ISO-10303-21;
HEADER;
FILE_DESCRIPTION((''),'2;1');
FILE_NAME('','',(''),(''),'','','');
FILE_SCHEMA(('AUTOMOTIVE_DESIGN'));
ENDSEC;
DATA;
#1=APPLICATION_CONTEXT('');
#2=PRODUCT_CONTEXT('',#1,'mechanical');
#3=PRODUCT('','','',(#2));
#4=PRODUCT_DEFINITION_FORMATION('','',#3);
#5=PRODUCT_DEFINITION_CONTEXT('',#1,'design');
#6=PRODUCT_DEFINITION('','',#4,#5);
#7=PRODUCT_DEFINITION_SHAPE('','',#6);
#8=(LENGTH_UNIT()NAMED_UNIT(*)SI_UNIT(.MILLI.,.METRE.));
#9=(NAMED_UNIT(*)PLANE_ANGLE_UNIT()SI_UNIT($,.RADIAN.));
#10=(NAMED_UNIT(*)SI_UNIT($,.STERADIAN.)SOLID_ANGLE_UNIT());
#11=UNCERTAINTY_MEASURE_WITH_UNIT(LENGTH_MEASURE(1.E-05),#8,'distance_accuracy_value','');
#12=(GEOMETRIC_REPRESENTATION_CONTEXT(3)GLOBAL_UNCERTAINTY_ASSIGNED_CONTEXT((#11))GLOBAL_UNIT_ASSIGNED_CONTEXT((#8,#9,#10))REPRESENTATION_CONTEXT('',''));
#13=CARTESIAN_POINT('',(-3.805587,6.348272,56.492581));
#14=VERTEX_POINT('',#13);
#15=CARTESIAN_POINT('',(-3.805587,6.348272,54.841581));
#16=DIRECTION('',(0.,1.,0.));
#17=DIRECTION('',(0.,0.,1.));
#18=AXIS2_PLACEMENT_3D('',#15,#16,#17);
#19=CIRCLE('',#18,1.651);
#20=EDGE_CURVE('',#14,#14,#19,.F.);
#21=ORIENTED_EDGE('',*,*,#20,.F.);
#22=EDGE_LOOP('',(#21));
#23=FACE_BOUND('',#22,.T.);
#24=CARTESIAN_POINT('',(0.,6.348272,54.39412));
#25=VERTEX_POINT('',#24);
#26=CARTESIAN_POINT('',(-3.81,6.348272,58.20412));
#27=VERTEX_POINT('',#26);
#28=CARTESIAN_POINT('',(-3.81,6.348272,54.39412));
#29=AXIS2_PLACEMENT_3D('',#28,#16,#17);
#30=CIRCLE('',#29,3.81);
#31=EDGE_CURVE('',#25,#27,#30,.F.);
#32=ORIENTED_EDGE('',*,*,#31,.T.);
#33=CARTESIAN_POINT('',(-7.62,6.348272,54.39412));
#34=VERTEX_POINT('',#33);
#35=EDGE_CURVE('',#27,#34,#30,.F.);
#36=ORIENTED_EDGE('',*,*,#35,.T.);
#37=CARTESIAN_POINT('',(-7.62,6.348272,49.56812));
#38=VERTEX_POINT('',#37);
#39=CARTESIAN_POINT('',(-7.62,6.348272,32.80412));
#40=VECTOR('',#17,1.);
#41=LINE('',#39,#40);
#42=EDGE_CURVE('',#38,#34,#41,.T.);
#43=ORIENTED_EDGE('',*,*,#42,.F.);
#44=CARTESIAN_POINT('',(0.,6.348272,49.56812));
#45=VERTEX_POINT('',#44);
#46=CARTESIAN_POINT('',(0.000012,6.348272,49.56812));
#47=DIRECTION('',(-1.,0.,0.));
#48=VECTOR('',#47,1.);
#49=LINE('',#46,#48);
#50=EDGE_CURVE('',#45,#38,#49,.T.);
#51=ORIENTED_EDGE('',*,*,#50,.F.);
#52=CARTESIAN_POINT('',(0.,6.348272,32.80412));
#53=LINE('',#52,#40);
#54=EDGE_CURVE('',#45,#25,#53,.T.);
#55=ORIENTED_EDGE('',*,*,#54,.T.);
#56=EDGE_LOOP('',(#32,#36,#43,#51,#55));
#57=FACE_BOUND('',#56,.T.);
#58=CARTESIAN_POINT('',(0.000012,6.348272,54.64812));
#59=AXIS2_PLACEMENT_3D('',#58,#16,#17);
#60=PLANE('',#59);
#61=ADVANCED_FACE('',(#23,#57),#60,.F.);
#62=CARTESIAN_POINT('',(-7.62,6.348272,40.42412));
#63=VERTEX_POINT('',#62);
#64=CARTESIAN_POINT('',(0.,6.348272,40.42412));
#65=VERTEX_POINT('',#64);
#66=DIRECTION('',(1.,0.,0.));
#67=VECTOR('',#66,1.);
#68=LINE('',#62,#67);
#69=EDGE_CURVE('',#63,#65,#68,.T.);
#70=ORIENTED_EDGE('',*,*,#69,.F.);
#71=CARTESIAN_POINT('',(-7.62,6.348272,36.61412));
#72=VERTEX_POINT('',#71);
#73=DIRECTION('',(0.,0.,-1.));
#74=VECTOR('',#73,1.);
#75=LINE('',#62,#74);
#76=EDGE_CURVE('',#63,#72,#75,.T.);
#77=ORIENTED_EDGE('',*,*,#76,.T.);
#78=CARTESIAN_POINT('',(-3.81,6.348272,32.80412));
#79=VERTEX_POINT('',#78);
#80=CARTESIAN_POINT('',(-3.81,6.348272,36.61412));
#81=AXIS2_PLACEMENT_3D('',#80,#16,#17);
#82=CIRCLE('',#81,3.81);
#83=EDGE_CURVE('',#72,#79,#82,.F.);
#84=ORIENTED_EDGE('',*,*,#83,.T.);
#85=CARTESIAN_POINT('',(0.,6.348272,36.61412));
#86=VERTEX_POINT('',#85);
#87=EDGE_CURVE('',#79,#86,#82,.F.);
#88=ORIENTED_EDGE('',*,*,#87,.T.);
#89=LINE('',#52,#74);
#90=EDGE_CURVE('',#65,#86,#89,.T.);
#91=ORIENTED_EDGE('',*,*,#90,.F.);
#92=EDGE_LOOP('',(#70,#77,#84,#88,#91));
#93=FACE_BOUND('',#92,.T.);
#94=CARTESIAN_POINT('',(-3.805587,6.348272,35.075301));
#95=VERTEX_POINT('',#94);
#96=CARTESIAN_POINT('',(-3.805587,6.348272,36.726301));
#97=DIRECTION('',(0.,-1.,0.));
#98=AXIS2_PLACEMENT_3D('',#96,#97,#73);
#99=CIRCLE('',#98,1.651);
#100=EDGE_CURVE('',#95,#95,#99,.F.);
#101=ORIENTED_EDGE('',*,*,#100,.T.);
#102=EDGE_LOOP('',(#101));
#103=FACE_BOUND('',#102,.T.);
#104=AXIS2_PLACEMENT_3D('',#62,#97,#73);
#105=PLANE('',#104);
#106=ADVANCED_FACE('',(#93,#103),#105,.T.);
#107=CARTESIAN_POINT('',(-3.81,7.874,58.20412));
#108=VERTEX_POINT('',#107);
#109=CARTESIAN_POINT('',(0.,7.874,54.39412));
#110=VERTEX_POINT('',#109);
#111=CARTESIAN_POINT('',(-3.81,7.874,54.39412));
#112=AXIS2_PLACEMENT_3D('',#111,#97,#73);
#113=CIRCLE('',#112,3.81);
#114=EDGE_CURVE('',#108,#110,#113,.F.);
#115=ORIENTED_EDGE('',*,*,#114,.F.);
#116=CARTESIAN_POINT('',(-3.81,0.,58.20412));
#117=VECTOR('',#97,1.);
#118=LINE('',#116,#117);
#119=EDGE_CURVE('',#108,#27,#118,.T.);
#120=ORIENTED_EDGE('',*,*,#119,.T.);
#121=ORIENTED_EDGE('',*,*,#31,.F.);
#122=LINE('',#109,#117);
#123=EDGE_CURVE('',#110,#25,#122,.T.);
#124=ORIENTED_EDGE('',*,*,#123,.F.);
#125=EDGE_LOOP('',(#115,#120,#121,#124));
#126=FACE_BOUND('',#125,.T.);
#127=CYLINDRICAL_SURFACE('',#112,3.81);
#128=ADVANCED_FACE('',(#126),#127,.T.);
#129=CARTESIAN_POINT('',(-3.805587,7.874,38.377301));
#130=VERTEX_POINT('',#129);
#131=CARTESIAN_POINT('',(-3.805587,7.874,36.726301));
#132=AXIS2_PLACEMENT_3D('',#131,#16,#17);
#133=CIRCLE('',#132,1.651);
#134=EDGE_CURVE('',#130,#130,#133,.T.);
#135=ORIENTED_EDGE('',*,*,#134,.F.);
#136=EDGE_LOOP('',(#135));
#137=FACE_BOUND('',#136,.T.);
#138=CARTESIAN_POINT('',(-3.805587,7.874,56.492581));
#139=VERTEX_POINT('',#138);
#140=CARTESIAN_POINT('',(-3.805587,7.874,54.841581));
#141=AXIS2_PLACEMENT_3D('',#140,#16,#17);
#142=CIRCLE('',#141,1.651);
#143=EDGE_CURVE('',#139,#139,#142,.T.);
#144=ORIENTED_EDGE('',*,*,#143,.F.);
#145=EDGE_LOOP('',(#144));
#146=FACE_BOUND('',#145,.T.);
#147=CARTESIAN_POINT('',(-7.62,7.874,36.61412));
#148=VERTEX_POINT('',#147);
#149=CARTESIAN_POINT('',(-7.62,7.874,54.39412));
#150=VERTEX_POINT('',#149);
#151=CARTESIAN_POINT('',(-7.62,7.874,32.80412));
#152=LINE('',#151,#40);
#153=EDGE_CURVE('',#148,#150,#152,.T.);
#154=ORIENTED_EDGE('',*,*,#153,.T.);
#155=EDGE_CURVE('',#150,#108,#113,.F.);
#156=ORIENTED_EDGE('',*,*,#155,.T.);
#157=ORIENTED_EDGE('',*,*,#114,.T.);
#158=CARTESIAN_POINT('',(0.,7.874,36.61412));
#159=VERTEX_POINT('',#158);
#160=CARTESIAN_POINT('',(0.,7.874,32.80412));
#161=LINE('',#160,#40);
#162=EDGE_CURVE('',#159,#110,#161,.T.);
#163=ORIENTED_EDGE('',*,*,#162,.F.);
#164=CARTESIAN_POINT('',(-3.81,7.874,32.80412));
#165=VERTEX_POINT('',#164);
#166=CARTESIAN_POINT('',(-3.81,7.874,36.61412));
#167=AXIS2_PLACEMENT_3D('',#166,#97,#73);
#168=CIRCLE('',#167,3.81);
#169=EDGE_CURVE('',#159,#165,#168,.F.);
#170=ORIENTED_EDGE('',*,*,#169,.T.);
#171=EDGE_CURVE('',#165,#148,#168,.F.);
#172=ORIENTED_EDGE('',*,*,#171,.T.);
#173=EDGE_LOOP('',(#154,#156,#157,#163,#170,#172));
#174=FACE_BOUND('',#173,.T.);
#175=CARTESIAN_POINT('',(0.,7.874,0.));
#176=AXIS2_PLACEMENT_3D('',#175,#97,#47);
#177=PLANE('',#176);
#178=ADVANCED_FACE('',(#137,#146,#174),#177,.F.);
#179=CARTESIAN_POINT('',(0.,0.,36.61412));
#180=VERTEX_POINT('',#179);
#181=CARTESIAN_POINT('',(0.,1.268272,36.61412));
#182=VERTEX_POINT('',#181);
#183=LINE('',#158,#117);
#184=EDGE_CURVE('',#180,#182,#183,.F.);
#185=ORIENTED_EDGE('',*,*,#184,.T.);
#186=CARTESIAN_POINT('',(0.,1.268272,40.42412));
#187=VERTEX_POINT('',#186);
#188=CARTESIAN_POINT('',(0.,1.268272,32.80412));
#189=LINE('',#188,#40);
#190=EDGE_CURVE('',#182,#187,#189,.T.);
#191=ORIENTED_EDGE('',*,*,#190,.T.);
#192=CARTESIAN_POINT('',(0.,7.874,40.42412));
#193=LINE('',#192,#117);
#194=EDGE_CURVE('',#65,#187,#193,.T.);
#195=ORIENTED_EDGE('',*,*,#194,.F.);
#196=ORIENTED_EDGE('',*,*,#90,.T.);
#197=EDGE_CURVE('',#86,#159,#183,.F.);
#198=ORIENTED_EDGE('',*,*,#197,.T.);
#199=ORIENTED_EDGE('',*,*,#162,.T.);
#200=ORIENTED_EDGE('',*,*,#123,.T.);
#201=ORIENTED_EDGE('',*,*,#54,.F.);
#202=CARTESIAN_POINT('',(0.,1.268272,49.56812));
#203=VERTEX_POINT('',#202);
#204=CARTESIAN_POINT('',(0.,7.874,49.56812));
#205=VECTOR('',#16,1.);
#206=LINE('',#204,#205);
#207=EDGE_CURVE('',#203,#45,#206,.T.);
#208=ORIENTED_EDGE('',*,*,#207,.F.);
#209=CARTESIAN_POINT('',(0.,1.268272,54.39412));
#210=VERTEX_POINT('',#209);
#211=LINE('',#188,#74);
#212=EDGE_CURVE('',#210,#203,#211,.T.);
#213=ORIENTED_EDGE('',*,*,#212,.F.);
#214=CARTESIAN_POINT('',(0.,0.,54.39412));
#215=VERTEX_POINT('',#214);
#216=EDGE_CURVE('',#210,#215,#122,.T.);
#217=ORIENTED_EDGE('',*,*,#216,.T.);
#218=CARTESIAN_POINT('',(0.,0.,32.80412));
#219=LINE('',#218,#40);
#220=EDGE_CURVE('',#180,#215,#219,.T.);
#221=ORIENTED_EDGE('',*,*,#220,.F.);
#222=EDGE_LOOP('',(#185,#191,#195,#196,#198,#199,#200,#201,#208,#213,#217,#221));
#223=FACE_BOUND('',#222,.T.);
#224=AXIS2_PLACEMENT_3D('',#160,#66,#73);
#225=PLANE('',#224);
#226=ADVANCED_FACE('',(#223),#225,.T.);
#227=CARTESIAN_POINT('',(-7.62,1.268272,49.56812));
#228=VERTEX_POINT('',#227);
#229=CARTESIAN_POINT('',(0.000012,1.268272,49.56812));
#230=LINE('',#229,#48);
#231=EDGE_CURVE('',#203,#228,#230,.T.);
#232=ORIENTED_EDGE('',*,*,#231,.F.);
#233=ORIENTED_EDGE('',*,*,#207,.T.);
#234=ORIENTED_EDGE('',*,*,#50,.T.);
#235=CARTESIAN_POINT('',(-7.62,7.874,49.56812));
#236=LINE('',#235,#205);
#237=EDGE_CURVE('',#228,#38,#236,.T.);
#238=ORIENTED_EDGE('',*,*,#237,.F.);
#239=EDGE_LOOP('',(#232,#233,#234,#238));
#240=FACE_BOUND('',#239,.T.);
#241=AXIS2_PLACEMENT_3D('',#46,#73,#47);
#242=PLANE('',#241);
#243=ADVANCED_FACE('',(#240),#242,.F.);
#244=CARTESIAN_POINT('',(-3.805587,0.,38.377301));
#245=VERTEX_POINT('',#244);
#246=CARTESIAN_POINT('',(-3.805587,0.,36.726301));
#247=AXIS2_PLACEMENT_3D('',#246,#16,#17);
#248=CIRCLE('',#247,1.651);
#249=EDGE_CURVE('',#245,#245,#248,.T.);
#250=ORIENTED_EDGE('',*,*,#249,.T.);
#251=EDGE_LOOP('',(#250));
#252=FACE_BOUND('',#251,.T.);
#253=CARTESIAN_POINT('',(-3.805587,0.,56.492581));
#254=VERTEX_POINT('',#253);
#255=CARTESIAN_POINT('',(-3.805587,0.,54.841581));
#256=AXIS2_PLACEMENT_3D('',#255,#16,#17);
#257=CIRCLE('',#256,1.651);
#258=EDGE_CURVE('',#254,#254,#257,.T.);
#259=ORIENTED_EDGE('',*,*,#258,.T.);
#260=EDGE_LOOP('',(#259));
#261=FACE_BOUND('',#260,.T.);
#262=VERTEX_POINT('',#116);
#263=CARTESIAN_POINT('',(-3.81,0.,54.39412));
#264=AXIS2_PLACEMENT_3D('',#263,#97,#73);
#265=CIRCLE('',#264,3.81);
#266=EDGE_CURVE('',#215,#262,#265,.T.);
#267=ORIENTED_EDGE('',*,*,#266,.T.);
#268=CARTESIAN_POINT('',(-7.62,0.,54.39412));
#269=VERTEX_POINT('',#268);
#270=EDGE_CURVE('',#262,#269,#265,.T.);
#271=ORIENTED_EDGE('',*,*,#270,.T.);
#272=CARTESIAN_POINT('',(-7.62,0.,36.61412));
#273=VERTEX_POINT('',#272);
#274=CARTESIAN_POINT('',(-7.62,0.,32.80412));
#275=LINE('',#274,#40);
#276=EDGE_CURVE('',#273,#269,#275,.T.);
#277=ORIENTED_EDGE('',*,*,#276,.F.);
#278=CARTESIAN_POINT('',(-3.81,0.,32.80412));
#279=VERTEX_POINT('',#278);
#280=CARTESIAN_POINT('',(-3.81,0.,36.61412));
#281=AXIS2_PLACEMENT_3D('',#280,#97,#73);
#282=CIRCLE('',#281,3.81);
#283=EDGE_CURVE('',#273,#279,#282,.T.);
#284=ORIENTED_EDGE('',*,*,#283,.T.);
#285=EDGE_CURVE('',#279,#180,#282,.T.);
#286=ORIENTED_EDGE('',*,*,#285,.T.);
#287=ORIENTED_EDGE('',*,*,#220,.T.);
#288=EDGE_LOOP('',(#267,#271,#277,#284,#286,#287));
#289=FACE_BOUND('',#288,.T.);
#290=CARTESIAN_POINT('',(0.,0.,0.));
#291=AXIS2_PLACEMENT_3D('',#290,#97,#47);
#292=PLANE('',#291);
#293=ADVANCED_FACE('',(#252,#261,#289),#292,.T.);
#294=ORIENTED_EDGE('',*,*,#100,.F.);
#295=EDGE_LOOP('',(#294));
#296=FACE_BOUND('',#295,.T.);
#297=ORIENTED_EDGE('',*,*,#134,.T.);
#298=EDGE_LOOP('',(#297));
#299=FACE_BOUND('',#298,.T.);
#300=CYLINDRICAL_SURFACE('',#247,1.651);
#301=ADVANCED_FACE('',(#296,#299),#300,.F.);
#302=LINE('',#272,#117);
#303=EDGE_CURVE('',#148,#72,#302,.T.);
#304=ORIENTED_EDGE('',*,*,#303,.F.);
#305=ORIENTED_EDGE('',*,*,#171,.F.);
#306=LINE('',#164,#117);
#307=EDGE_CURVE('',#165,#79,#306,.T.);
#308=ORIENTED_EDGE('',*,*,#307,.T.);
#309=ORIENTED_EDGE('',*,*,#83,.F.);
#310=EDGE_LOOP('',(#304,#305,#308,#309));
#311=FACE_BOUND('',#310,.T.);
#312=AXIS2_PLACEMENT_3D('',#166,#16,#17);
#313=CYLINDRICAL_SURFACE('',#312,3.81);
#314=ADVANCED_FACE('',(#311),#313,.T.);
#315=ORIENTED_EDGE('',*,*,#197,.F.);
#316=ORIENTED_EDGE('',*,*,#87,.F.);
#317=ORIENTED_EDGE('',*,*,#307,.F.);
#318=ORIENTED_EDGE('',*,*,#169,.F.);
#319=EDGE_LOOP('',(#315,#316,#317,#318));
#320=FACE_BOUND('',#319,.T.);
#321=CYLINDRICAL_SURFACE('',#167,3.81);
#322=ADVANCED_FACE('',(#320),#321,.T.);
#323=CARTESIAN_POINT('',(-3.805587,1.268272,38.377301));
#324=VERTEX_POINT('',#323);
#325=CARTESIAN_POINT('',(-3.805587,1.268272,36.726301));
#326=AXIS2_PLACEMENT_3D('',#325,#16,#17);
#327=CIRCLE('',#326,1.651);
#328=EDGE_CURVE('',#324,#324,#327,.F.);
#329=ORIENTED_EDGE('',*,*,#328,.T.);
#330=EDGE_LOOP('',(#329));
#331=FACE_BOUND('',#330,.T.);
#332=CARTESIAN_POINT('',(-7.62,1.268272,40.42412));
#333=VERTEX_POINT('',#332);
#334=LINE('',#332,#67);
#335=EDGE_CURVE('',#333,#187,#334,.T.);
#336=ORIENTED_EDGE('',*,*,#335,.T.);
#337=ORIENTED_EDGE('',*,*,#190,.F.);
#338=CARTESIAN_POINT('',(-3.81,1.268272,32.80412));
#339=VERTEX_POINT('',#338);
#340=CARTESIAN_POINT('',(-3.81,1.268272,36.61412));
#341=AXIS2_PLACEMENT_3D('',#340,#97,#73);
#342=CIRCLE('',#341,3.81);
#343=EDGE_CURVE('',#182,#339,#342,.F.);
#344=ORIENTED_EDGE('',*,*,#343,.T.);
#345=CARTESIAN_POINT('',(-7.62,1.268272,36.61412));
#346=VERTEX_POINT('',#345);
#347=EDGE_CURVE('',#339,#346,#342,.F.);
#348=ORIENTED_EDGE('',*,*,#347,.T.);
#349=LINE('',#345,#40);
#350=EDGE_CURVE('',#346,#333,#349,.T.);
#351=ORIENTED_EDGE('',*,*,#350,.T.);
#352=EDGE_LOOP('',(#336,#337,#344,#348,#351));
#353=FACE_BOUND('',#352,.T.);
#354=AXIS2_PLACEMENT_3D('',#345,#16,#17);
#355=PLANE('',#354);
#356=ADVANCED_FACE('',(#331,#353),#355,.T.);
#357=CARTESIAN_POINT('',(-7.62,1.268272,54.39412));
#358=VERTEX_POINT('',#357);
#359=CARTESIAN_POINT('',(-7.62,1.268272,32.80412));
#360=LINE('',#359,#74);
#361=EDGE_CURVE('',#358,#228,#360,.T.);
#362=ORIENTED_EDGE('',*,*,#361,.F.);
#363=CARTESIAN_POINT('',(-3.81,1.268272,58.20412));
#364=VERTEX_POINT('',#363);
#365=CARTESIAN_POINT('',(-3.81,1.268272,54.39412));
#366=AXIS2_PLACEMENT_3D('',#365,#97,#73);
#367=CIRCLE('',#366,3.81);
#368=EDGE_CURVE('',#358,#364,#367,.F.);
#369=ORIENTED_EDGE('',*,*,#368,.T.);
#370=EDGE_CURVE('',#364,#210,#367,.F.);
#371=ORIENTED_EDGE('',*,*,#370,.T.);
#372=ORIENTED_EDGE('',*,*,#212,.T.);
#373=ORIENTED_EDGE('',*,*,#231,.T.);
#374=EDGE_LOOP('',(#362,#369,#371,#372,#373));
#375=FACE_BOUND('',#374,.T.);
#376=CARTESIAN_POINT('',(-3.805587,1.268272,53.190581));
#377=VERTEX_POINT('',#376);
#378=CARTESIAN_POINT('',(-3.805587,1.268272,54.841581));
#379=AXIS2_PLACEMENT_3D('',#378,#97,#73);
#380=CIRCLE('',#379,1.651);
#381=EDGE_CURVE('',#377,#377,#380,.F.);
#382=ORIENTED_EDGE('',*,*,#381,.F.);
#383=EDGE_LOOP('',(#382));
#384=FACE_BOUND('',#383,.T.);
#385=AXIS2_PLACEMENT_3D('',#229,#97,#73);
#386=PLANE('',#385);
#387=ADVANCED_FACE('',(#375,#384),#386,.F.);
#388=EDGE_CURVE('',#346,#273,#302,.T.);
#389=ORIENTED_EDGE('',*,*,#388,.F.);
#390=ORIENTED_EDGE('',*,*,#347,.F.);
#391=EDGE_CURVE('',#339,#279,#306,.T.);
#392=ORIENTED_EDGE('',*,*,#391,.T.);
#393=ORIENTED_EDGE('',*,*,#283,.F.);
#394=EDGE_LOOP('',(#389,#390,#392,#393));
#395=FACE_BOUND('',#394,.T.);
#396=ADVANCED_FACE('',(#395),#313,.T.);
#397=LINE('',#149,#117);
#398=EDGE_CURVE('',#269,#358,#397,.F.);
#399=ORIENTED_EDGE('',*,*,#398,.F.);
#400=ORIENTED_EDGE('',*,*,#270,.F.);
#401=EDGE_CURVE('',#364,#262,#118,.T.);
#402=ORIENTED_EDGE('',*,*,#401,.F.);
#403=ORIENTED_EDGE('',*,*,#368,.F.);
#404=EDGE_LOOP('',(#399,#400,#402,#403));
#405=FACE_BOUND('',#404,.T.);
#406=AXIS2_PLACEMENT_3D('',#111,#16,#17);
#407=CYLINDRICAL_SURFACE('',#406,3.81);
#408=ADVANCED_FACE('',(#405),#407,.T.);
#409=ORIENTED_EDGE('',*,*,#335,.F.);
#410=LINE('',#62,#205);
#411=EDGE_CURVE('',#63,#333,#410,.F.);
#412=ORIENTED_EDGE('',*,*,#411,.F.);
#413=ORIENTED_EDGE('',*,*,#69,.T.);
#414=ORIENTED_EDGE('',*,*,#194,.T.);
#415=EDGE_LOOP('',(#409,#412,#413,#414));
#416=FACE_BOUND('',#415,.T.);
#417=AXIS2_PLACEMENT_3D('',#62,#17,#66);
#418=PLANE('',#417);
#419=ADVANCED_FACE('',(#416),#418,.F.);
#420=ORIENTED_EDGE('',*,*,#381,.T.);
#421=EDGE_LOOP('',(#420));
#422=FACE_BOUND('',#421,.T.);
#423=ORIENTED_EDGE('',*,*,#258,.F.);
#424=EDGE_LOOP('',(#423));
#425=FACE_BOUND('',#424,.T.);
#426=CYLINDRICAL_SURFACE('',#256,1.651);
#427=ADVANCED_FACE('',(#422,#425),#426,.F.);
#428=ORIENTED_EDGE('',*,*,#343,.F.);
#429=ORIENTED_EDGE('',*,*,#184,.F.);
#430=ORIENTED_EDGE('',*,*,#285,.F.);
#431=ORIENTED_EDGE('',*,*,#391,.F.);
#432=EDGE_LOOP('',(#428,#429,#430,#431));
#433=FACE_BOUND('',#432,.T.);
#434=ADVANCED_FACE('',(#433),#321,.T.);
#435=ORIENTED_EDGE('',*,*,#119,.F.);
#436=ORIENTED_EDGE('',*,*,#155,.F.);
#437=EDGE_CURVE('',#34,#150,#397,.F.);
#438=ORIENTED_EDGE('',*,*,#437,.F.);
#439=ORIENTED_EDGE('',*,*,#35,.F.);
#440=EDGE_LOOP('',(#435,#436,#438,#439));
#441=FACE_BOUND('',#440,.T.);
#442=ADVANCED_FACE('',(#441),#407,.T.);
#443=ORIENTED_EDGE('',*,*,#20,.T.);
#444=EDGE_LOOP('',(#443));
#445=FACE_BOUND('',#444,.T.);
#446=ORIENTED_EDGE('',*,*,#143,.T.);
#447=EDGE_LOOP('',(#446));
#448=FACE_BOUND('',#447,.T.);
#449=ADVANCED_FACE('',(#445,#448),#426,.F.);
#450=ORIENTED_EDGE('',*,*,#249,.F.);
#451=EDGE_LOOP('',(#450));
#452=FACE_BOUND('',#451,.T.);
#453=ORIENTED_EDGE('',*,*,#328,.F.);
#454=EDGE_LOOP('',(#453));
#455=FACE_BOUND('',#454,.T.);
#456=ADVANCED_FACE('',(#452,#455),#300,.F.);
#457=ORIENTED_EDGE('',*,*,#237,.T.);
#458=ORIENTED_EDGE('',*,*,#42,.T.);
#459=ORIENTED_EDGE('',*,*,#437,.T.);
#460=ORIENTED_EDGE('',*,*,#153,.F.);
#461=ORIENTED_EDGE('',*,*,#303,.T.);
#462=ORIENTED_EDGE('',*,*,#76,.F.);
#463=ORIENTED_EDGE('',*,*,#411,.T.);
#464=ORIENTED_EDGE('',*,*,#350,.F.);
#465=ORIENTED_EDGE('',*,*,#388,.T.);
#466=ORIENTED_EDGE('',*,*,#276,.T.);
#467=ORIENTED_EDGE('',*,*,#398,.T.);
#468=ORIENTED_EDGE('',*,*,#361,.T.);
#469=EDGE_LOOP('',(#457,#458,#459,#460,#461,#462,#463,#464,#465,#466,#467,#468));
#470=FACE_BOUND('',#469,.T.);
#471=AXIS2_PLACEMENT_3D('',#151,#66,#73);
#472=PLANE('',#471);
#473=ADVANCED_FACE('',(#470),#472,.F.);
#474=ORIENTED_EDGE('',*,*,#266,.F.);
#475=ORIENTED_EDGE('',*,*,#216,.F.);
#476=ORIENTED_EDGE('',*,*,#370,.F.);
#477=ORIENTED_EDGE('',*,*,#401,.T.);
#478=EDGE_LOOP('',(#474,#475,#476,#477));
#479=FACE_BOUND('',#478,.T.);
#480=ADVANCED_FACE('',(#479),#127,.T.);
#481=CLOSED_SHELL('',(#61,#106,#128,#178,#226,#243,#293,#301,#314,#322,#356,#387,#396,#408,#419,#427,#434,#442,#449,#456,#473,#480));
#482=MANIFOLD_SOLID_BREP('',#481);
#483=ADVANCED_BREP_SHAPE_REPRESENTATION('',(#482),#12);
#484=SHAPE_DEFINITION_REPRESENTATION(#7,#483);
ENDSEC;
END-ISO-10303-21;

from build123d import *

# Parameters (mm, degrees)
SKETCH1_W               = 7.62
SKETCH1_H               = 25.4
EXTRUDE_THIN1_DEPTH     = 7.874
FILLET1_R               = 3.81
SKETCH3_R               = 1.651
CUT_EXTRUDE1_DEPTH      = 7.874
LPATTERN1_COUNT         = 2
LPATTERN1_PITCH         = 18.11528
SKETCH5_W               = 3.81
SKETCH5_H               = 5.08
CUT_EXTRUDE_THIN1_DEPTH = 60.226546789
CUT_EXTRUDE_THIN2_START = -7.874
SKETCH5_3_W             = 5.08
SKETCH5_3_H             = 5.08
CUT_EXTRUDE_THIN2_DEPTH = 68.100546789
LPATTERN2_COUNT         = 2
LPATTERN2_PITCH         = 18.034
LPATTERN4_COUNT         = 2
LPATTERN4_PITCH         = 18.034


with BuildPart() as part:
    # Sketch1 → Extrude-Thin1 (new body)
    with BuildSketch(Plane(origin=(0, 0, 0), x_dir=(1, 0, 0), z_dir=(0, 1, 0))):
        with Locations((-3.81, -45.504119859)):
            Rectangle(SKETCH1_W, SKETCH1_H)
    extrude(amount=EXTRUDE_THIN1_DEPTH)

    # Fillet1
    fillet1_edges = [part.edges().sort_by_distance(p)[0] for p in [
        (-7.62, 3.937, 32.804119859),
        (0, 3.937, 32.804119859),
        (0, 3.937, 58.204119859),
        (-7.62, 3.937, 58.204119859),
    ]]
    fillet(fillet1_edges, radius=FILLET1_R - 0.0001)  # a hair under: the kernel refuses the full size

    # Sketch3 → Cut-Extrude1 (cut)
    with BuildSketch(Plane(origin=(0, 7.874, 0), x_dir=(1, 0, 0), z_dir=(0, 1, 0))):
        with Locations(Location((-3.805586637, -54.841580585, 0), (0, 0, 270))):
            Circle(SKETCH3_R)
    cut_extrude1 = extrude(amount=-CUT_EXTRUDE1_DEPTH, mode=Mode.SUBTRACT)

    # LPattern1: Cut-Extrude1 ×2
    with Locations(*[(0, 0, -i * LPATTERN1_PITCH) for i in range(1, LPATTERN1_COUNT)]):
        add(cut_extrude1, mode=Mode.SUBTRACT)

    # Sketch5 → Cut-Extrude-Thin1 (cut, symmetric)
    with BuildSketch(Plane(origin=(0, 0, 0), x_dir=(0, 0, -1), z_dir=(1, 0, 0))):
        with Locations((-38.519119859, 3.808272384)):
            Rectangle(SKETCH5_W, SKETCH5_H)
    cut_extrude_thin1 = extrude(amount=CUT_EXTRUDE_THIN1_DEPTH, both=True, mode=Mode.SUBTRACT)

    # Sketch5<3> → Cut-Extrude-Thin2 (cut)
    with BuildSketch(Plane(origin=(0, 0, 0), x_dir=(0, 0, -1), z_dir=(1, 0, 0)).offset(CUT_EXTRUDE_THIN2_START)):
        with Locations((-34.074119859, 3.808272384)):
            Rectangle(SKETCH5_3_W, SKETCH5_3_H)
    cut_extrude_thin2 = extrude(amount=CUT_EXTRUDE_THIN2_DEPTH, mode=Mode.SUBTRACT)

    # LPattern2: Cut-Extrude-Thin2 ×2
    with Locations(*[(0, 0, i * LPATTERN2_PITCH) for i in range(1, LPATTERN2_COUNT)]):
        add(cut_extrude_thin2, mode=Mode.SUBTRACT)

    # LPattern4: Cut-Extrude-Thin1 ×2
    with Locations(*[(0, 0, i * LPATTERN4_PITCH) for i in range(1, LPATTERN4_COUNT)]):
        add(cut_extrude_thin1, mode=Mode.SUBTRACT)


solid = part.part
